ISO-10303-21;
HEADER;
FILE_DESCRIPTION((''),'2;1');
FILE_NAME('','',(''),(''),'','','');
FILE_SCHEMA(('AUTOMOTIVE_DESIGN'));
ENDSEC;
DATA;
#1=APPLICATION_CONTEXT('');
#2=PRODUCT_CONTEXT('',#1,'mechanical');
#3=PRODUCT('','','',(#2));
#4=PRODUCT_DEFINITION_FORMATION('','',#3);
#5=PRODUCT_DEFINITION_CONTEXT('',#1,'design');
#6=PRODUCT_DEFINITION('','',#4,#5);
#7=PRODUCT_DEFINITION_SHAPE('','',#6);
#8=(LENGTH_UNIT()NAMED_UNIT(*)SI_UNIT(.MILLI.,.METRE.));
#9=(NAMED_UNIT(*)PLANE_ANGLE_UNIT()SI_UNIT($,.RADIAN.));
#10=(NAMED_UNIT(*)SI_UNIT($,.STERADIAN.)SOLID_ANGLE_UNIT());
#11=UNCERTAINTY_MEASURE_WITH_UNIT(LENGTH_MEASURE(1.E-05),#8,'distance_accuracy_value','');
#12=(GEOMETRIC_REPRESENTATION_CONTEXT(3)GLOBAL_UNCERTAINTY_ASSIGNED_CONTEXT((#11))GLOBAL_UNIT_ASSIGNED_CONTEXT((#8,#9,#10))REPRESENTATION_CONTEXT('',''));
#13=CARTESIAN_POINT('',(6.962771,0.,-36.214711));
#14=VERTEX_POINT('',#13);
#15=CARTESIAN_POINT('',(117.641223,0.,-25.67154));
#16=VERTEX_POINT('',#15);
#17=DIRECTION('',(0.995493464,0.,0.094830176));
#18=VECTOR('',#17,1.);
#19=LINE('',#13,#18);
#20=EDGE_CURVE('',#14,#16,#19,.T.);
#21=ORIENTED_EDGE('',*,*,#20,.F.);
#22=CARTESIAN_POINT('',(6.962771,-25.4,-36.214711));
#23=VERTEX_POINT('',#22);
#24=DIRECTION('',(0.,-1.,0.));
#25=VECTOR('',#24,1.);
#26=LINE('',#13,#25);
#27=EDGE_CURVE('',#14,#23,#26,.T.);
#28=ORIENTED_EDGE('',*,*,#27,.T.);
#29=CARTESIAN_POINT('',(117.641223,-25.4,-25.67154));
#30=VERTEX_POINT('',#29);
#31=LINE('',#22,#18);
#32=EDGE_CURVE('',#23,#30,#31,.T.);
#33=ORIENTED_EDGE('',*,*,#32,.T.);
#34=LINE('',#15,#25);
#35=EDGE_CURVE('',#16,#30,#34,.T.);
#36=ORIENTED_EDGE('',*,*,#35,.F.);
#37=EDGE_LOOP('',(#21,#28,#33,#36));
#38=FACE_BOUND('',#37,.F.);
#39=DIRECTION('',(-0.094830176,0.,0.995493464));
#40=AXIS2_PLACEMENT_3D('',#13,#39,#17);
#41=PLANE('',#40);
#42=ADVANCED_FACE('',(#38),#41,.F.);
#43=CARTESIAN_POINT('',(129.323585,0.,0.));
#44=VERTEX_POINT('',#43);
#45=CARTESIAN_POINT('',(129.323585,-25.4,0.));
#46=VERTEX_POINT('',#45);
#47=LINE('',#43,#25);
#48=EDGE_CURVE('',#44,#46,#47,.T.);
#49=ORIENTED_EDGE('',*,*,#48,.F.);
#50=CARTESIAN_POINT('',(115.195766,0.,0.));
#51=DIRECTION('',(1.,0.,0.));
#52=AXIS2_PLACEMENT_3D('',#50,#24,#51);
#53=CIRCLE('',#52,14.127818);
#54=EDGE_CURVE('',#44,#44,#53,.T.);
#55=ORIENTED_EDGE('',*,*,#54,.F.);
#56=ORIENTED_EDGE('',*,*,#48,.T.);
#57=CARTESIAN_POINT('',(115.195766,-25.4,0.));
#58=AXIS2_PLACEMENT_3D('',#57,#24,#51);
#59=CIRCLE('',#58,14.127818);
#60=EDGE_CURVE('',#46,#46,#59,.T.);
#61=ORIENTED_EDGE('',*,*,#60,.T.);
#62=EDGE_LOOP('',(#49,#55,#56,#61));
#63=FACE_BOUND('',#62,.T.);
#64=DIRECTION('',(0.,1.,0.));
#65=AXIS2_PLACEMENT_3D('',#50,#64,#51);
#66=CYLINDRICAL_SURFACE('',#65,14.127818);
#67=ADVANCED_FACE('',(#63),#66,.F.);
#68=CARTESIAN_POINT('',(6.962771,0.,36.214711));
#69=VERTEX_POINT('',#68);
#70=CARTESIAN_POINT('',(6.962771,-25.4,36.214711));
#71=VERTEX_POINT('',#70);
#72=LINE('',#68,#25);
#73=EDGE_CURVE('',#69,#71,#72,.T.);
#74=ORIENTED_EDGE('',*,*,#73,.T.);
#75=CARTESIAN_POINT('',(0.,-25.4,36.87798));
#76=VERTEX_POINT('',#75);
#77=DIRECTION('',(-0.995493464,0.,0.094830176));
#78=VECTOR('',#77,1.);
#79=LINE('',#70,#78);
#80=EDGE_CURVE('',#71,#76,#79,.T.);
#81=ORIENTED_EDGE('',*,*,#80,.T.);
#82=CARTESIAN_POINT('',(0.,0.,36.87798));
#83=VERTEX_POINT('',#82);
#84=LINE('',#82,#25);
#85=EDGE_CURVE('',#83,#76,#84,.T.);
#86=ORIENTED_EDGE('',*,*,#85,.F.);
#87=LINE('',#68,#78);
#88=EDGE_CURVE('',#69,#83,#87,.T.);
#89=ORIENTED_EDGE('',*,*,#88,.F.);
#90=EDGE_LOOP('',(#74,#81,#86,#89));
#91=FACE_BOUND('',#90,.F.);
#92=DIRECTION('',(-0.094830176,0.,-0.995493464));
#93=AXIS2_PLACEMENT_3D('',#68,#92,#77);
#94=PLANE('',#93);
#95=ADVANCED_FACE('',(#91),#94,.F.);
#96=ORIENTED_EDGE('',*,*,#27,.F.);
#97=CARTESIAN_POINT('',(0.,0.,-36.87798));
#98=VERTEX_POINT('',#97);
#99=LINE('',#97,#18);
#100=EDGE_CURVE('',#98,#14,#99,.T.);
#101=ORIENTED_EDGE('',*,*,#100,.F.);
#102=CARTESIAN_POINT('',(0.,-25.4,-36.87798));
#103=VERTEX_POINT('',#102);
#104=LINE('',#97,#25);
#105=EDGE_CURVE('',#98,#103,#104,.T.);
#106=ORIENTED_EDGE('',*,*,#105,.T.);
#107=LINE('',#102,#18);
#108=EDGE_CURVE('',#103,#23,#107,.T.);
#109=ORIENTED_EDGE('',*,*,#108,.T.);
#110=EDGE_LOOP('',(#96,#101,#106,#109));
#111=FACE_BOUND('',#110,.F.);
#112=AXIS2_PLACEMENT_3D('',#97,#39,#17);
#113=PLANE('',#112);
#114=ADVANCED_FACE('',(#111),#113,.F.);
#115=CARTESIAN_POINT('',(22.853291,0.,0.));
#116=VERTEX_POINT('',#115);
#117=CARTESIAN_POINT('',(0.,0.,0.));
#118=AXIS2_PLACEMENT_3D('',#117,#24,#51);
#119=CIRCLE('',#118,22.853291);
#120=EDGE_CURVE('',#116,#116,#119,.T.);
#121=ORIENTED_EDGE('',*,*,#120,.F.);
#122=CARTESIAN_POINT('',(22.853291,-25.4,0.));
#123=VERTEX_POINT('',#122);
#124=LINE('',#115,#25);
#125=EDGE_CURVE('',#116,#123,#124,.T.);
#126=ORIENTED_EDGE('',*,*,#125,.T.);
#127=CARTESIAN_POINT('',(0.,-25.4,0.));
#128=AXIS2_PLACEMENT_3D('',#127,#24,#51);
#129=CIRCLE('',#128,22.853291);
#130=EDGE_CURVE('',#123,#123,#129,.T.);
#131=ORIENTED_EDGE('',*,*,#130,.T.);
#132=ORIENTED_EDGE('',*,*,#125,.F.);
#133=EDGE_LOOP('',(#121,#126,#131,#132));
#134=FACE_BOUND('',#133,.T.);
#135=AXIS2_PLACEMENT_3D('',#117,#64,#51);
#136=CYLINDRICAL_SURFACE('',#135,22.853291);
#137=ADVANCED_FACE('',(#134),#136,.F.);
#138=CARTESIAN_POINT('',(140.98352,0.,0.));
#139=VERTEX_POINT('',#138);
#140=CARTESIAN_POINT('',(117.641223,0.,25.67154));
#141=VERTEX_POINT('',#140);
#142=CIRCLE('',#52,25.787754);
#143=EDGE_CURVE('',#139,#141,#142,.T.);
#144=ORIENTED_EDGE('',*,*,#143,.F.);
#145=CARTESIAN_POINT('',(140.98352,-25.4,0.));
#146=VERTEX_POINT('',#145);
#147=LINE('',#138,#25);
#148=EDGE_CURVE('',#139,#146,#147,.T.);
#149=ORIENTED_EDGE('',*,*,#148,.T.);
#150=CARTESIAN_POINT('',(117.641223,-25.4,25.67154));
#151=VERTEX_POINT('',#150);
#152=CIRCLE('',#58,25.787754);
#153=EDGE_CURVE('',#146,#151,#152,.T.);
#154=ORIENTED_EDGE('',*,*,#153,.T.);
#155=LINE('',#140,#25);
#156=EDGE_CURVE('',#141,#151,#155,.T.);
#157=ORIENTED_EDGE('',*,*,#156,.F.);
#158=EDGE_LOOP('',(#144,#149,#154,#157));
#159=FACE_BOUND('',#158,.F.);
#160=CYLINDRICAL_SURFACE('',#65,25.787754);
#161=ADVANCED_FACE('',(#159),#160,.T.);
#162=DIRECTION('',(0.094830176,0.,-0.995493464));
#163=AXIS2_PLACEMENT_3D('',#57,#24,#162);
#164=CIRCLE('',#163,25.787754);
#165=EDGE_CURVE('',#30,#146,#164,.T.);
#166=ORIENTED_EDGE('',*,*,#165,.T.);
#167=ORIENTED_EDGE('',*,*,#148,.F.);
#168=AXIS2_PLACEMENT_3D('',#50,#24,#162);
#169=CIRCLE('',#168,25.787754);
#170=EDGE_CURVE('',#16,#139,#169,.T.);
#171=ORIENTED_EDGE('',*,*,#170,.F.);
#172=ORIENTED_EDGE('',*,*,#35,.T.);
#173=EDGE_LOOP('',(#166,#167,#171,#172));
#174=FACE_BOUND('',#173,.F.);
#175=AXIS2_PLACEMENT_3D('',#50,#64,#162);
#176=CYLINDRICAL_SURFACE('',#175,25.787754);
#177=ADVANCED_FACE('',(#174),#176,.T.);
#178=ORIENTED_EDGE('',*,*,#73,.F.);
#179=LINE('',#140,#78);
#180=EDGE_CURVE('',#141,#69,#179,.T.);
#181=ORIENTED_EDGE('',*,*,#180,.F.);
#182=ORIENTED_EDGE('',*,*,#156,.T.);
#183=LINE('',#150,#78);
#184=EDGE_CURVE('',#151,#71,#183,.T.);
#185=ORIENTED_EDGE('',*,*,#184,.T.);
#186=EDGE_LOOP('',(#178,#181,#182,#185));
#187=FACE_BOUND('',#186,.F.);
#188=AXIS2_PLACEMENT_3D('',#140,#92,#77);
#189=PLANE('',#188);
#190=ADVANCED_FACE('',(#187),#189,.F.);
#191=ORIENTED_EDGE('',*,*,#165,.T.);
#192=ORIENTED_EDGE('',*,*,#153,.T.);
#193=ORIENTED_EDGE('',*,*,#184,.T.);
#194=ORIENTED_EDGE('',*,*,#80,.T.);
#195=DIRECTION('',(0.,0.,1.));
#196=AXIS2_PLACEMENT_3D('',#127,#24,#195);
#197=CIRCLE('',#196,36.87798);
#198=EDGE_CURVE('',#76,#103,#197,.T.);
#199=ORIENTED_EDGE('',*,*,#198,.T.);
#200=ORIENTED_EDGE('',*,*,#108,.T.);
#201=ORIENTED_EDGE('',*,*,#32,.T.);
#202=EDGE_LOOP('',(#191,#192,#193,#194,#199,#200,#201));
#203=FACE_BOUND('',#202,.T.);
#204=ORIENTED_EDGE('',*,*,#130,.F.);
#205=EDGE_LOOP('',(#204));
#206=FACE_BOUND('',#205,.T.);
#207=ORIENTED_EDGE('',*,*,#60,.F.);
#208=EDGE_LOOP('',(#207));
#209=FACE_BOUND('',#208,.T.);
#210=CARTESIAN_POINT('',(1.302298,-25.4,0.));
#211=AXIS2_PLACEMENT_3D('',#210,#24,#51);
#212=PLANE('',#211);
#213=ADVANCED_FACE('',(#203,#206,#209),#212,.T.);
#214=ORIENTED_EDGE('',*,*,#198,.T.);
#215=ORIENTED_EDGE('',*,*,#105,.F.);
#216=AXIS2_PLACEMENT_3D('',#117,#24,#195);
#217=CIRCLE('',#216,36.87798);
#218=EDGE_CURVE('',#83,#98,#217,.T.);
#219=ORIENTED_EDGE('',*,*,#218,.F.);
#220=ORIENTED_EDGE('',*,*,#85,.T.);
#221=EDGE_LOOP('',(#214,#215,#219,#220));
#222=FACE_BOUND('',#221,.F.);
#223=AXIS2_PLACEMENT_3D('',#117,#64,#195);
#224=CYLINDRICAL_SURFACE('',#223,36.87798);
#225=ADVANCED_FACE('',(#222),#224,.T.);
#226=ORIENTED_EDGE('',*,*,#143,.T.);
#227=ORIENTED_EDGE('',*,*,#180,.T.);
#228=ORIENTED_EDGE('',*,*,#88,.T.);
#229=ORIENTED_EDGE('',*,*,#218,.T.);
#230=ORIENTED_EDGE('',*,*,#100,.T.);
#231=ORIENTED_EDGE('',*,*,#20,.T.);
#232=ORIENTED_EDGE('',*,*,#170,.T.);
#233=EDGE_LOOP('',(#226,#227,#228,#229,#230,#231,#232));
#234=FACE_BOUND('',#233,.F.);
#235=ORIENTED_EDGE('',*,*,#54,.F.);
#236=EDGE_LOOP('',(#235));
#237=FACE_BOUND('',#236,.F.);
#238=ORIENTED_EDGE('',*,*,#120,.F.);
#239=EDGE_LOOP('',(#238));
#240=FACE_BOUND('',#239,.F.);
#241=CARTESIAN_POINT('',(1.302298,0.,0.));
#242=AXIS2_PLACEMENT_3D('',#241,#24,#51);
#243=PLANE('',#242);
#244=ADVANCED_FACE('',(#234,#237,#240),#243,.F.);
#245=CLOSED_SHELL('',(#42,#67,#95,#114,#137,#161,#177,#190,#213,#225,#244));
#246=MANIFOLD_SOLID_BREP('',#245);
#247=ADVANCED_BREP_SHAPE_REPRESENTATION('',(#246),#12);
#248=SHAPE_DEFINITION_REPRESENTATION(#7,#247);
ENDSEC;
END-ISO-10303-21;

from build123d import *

# Parameters (mm, degrees)
F0_R     = 22.8532905428
F0_R_2   = 14.1278184646
F1_DEPTH = 25.4


with BuildPart() as f1:
    # F0 (on Front) → F1 (new body)
    with BuildSketch(Plane.XZ):
        with BuildLine():
            Line((6.9627707482, 36.2147105875), (0, 36.8779804142))
            ThreePointArc((0, 36.8779804142), (-36.8779804142, 0), (0, -36.8779804142))
            Line((0, -36.8779804142), (6.9627707482, -36.2147105875))
            ThreePointArc((6.9627707482, -36.2147105875), (28.4320098015, -23.4862993695), (36.8779804142, 0))
            ThreePointArc((36.8779804142, 0), (28.4320098015, 23.4862993695), (6.9627707482, 36.2147105875))
        make_face()
        Circle(F0_R, mode=Mode.SUBTRACT)
        with BuildLine():
            Line((117.6412233187, 25.6715402452), (6.9627707482, 36.2147105875))
            ThreePointArc((6.9627707482, 36.2147105875), (28.4320098015, 23.4862993695), (36.8779804142, 0))
            ThreePointArc((36.8779804142, 0), (28.4320098015, -23.4862993695), (6.9627707482, -36.2147105875))
            Line((6.9627707482, -36.2147105875), (117.6412233187, -25.6715402452))
            ThreePointArc((117.6412233187, -25.6715402452), (89.4080124161, 0), (117.6412233187, 25.6715402452))
        make_face()
        with BuildLine():
            ThreePointArc((140.9835197666, 0), (134.2754816057, 17.3485646526), (117.6412233187, 25.6715402452))
            ThreePointArc((117.6412233187, 25.6715402452), (89.4080124161, 0), (117.6412233187, -25.6715402452))
            ThreePointArc((117.6412233187, -25.6715402452), (134.2754816057, -17.3485646526), (140.9835197666, 0))
        make_face()
        with Locations((115.1957660913, 0)):
            Circle(F0_R_2, mode=Mode.SUBTRACT)
    extrude(amount=F1_DEPTH)


solid = f1.part
